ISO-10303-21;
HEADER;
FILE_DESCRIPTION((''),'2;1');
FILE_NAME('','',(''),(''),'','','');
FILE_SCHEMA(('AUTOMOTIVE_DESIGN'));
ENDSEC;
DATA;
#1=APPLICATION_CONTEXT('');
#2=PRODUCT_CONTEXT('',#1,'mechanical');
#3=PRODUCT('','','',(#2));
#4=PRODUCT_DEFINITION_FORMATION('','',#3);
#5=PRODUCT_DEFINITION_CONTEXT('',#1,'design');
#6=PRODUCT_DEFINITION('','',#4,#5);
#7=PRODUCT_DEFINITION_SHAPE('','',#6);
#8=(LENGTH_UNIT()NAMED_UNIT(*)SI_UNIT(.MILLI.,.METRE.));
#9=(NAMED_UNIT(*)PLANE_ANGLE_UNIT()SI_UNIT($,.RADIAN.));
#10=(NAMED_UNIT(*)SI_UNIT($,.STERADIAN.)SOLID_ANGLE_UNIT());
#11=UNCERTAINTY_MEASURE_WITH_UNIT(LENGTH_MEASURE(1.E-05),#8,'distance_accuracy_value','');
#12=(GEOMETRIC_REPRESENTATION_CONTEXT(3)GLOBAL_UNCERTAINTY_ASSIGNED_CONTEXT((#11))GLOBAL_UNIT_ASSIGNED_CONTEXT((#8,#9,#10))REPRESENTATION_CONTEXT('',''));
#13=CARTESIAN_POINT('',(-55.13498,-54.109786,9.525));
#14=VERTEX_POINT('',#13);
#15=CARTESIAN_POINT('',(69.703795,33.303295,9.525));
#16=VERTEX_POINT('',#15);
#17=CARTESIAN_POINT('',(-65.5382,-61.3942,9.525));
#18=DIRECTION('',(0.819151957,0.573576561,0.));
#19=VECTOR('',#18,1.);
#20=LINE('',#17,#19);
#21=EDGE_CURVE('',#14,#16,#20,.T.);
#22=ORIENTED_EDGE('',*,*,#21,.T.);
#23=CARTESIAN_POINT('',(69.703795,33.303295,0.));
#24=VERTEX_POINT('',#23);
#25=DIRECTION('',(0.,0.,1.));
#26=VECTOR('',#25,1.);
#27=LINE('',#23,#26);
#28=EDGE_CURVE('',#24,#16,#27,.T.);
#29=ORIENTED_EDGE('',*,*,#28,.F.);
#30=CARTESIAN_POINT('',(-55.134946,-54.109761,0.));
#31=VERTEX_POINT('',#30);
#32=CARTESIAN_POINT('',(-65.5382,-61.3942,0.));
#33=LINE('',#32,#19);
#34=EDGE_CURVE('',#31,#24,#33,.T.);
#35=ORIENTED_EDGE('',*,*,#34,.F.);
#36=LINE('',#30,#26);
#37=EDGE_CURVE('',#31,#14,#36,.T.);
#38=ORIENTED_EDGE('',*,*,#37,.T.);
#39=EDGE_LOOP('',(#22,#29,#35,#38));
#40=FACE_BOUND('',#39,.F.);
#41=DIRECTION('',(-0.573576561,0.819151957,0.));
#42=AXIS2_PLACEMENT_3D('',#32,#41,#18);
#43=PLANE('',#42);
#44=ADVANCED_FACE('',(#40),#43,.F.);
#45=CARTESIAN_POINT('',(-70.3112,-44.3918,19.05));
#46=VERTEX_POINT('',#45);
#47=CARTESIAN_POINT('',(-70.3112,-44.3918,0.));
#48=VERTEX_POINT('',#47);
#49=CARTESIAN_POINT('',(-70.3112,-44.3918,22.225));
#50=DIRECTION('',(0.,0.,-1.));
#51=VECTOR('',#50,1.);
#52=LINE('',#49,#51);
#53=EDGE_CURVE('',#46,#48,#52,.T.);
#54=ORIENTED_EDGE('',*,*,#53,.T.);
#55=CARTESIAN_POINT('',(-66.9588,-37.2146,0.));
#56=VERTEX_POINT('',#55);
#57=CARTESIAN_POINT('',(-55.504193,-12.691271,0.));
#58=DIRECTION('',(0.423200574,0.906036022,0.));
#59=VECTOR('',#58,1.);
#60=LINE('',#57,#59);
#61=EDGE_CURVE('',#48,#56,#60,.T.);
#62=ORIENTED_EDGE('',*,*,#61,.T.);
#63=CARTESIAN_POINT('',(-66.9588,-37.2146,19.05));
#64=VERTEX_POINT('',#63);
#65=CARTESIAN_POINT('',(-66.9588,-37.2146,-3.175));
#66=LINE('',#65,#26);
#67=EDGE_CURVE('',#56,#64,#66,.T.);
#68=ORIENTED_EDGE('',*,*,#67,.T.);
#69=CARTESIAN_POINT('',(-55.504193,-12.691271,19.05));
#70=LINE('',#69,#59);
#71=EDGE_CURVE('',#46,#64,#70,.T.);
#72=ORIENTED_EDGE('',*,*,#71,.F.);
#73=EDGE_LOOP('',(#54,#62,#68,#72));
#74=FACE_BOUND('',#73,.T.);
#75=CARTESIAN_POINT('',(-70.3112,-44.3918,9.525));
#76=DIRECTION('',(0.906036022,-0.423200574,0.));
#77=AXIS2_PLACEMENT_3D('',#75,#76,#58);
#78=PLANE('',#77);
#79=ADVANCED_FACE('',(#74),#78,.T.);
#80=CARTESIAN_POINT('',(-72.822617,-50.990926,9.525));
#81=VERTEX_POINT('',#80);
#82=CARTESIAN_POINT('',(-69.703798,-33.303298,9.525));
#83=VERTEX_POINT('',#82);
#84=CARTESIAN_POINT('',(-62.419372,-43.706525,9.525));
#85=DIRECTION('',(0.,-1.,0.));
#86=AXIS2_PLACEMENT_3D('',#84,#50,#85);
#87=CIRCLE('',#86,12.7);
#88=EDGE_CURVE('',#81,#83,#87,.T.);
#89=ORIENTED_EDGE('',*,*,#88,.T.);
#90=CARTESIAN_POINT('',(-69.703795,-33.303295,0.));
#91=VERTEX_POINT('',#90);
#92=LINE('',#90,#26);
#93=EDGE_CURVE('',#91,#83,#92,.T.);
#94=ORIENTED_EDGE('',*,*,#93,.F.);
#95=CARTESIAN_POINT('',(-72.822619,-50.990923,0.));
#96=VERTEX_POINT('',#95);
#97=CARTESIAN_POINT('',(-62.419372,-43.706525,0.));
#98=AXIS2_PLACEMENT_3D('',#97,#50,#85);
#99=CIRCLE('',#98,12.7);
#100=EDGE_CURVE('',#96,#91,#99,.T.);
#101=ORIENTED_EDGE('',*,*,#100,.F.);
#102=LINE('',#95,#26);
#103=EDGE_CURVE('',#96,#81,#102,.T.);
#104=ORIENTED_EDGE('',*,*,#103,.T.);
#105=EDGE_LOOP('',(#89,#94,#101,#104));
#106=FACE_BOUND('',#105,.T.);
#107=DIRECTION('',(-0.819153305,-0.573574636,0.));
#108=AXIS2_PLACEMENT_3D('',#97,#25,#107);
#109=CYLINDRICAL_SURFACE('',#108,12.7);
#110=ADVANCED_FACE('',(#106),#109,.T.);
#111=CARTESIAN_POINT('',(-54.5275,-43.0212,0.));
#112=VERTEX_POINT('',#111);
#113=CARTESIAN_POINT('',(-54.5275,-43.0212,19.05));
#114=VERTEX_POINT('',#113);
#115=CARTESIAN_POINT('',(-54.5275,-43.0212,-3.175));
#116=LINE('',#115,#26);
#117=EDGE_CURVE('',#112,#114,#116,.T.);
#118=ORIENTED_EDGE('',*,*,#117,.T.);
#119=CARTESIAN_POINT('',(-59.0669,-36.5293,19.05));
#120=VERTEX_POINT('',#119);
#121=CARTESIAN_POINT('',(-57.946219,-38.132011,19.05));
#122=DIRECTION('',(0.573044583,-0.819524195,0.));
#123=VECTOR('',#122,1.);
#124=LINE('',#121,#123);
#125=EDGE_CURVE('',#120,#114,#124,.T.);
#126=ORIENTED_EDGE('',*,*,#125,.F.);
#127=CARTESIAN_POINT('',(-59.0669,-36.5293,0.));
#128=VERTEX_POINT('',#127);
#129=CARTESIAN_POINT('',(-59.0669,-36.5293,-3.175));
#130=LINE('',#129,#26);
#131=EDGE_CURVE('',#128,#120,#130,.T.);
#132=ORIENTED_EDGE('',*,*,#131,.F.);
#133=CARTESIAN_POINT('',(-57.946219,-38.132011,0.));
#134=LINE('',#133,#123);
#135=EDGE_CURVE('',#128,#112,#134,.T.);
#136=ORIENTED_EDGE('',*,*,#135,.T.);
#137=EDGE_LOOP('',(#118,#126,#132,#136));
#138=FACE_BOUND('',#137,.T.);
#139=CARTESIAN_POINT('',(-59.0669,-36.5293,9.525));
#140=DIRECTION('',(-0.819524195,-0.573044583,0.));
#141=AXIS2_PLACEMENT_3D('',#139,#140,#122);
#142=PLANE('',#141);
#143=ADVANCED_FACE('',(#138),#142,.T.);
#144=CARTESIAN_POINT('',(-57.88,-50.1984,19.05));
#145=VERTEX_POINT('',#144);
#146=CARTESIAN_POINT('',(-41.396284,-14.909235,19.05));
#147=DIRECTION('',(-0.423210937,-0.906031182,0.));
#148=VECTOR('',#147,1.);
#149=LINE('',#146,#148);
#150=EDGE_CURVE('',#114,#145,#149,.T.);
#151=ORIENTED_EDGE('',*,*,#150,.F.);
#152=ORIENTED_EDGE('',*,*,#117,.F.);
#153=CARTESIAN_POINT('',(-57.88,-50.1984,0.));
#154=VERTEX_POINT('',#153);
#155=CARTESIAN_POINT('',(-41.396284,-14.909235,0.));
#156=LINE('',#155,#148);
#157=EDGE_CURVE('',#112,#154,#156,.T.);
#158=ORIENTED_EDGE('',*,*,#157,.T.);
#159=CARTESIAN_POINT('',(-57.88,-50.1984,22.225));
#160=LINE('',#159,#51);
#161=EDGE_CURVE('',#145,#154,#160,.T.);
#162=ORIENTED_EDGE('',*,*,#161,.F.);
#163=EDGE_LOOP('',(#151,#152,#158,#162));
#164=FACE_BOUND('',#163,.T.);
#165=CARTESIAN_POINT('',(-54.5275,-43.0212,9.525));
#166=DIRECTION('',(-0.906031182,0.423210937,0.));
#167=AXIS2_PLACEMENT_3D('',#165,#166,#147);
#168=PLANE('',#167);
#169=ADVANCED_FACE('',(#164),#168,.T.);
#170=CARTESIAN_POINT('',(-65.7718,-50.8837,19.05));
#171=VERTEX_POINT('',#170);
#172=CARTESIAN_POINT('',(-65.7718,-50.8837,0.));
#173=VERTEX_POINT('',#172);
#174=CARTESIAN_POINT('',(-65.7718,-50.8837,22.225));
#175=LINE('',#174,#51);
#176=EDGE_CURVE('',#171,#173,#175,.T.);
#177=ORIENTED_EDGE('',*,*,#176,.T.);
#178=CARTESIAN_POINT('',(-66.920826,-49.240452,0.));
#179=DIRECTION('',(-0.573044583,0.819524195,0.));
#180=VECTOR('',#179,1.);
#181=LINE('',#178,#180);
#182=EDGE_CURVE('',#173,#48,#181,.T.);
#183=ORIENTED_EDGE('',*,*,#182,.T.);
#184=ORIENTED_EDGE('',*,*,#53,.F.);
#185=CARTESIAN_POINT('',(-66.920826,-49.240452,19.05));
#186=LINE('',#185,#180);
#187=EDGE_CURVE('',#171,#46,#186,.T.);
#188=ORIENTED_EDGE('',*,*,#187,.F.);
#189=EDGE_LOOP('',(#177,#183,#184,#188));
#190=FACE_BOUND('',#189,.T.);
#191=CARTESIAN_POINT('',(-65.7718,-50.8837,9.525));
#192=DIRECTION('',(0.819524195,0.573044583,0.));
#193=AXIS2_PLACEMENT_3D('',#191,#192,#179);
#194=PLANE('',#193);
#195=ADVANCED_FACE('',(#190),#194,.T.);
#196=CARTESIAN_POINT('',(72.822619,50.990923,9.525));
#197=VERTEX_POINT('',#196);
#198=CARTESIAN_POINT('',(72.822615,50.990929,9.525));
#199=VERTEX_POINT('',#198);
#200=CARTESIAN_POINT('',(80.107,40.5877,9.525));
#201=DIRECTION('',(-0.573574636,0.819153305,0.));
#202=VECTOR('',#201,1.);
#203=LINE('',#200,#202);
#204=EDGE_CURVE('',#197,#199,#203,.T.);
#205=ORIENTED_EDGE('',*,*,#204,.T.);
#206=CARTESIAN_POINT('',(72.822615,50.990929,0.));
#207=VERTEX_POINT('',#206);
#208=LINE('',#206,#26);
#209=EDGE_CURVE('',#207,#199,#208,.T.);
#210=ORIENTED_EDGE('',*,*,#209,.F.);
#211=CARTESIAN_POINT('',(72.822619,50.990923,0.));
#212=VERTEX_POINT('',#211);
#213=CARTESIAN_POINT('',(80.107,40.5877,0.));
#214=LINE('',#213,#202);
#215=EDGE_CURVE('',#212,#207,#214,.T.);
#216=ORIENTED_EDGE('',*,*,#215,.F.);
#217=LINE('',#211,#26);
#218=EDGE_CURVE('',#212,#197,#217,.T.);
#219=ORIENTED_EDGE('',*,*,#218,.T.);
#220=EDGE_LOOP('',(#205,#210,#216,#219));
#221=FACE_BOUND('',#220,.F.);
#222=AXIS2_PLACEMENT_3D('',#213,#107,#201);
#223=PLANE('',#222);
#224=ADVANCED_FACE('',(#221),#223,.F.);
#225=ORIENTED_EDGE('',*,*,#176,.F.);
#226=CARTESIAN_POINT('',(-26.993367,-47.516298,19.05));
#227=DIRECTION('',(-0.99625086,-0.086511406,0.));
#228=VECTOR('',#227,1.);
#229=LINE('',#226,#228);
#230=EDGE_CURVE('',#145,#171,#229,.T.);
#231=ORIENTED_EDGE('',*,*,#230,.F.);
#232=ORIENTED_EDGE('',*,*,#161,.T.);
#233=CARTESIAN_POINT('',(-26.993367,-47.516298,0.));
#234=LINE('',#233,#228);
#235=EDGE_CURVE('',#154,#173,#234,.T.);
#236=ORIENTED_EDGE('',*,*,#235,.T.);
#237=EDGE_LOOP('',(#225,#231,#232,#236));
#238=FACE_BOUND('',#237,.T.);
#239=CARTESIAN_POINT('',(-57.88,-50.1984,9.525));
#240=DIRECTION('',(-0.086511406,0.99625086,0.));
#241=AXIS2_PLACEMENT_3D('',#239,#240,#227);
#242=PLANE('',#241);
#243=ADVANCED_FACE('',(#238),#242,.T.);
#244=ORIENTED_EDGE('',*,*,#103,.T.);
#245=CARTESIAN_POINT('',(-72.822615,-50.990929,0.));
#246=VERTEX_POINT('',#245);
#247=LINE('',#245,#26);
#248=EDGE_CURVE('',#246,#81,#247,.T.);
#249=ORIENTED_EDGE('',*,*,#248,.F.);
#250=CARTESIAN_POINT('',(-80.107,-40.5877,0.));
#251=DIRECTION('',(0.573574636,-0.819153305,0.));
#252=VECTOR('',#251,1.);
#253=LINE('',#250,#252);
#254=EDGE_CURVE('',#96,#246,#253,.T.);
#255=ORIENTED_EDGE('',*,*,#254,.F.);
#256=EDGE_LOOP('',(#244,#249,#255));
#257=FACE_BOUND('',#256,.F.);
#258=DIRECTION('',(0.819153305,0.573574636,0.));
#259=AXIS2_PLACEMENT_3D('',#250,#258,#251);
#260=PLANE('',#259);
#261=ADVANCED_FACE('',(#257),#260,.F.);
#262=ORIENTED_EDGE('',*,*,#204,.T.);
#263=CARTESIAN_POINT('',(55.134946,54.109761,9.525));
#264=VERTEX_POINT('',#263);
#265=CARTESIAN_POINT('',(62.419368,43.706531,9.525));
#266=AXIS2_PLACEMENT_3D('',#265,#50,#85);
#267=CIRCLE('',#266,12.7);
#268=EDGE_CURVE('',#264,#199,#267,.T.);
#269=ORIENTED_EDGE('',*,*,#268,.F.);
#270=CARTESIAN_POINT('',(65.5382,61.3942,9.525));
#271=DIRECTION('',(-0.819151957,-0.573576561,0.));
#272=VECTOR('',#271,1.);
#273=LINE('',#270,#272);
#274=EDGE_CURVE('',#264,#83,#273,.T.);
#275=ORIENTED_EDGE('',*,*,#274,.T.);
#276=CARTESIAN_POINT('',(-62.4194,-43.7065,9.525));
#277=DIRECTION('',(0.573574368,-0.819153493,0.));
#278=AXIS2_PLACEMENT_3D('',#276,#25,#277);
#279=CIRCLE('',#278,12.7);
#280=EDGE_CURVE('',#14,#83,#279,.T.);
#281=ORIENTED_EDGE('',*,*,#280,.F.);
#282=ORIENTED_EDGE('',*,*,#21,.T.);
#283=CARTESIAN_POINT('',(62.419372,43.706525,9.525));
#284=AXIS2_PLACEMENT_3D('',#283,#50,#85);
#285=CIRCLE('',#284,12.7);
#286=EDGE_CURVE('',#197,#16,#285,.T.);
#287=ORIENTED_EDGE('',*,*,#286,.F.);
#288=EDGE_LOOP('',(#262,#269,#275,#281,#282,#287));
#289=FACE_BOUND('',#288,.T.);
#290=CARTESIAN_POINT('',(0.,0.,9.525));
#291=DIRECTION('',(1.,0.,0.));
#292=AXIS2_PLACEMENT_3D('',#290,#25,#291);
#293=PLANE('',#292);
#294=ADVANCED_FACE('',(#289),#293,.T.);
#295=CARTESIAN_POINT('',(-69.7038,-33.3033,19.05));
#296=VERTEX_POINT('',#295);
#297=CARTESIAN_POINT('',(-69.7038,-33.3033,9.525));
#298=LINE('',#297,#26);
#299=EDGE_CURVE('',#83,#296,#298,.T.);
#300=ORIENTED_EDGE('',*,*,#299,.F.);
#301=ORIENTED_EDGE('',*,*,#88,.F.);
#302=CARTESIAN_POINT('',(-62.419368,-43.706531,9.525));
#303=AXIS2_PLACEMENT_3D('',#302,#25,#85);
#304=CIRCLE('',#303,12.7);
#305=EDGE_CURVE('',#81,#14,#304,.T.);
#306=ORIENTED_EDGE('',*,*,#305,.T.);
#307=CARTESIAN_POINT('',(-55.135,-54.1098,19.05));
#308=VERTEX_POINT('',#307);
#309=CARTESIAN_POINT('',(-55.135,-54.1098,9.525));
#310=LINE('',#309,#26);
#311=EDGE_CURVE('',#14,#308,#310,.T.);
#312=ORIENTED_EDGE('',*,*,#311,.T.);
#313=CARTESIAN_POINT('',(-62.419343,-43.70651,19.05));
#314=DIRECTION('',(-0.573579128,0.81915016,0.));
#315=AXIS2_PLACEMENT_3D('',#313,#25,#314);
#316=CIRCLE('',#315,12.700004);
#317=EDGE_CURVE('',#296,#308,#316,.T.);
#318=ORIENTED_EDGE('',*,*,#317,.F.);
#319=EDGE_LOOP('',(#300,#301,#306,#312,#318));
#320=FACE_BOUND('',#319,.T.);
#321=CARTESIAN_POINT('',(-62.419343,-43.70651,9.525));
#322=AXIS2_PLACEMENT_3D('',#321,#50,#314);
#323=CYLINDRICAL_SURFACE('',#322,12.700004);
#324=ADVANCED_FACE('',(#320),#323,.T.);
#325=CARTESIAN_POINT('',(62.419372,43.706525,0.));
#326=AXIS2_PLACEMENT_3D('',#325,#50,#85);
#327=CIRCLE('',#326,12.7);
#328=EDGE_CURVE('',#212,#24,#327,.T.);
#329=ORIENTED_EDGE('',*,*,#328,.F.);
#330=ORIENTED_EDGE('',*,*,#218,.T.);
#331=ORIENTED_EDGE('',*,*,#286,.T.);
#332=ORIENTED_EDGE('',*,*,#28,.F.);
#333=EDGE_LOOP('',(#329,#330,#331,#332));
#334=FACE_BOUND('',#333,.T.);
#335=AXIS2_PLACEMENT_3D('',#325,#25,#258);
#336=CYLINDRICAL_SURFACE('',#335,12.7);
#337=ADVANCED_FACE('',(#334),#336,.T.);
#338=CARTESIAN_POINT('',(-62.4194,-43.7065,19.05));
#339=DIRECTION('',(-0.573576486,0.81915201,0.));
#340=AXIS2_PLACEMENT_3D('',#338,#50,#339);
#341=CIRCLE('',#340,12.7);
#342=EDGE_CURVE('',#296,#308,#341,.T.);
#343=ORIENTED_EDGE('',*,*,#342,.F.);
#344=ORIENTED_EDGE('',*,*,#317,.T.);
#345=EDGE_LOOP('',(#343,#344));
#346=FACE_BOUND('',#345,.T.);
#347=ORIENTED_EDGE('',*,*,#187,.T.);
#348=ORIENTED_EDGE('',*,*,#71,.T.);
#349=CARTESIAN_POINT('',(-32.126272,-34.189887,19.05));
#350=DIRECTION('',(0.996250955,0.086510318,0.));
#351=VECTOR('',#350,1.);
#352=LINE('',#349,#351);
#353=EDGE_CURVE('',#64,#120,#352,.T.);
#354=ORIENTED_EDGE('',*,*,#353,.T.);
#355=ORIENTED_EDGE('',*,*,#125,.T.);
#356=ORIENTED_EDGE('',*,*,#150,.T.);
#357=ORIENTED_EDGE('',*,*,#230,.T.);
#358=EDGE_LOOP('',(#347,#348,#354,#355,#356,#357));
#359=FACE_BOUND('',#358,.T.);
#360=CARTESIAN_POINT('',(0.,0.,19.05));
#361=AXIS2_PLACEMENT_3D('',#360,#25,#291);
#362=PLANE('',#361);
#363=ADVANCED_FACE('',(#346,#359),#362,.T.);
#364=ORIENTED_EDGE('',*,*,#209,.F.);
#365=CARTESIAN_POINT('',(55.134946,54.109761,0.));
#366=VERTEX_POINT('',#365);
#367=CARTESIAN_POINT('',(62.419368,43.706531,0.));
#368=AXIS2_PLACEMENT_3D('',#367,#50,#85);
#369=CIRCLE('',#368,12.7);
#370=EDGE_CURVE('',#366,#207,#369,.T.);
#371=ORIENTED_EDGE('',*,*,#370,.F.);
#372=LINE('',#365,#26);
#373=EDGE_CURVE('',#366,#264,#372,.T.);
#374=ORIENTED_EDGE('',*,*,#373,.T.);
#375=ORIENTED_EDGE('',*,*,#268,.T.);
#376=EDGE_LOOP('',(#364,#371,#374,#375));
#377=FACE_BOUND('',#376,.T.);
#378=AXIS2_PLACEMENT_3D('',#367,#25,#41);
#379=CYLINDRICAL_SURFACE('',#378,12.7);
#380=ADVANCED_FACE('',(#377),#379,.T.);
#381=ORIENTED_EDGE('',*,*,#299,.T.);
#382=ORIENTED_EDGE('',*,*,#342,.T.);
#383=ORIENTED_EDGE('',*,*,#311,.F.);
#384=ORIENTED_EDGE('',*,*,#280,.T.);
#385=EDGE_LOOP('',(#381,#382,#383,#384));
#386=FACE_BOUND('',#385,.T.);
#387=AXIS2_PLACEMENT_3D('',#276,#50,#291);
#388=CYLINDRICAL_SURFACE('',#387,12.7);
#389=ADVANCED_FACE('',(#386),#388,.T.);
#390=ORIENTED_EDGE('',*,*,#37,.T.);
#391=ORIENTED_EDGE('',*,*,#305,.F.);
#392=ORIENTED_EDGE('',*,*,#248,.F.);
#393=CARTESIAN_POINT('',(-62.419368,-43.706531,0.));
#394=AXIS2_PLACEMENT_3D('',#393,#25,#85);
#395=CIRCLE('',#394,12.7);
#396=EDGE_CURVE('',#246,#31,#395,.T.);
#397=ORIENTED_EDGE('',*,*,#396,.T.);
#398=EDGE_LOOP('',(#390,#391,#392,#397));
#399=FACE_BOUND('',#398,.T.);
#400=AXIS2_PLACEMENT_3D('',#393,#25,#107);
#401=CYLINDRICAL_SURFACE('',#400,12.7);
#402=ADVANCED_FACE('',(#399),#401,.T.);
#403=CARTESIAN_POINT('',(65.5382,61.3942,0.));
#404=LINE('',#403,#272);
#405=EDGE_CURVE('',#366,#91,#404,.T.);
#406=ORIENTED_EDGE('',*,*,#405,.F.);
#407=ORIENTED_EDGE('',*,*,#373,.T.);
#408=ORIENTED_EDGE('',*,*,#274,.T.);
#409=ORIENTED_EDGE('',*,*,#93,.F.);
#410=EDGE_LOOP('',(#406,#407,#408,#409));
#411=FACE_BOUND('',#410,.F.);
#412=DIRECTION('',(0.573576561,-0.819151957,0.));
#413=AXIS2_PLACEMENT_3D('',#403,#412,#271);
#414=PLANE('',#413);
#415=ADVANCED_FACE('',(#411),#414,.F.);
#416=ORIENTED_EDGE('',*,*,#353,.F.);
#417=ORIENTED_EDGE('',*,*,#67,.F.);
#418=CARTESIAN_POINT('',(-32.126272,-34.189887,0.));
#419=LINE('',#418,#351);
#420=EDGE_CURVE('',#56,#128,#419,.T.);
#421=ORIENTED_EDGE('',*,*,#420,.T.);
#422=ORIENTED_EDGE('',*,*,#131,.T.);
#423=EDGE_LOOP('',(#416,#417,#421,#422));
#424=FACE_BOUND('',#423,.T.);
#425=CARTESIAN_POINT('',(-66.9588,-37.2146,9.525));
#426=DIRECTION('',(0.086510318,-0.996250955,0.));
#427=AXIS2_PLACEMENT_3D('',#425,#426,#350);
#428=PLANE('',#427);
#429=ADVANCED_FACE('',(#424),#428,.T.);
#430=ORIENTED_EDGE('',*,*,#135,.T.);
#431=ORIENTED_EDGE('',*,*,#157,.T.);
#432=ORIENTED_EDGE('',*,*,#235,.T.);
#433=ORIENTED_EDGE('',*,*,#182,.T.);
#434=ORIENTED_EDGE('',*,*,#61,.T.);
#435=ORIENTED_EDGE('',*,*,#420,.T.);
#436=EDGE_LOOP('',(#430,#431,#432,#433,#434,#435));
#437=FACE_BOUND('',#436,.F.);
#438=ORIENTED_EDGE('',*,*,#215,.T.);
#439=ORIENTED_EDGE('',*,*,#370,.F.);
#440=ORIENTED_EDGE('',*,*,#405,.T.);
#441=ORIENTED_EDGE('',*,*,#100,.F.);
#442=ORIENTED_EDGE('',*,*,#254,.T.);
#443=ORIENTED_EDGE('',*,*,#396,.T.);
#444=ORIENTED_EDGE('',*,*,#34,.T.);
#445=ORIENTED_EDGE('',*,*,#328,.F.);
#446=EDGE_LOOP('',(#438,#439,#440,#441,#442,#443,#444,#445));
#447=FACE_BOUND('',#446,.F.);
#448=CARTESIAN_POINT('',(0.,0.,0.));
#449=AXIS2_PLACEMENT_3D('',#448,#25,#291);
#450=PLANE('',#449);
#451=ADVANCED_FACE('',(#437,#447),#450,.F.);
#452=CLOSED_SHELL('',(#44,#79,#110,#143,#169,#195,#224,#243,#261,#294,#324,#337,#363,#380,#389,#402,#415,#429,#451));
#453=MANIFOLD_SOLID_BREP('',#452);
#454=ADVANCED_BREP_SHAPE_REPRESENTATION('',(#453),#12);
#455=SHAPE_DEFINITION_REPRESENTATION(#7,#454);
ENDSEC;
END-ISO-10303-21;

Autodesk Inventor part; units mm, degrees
ref_plane "YZ Plane" through (0, 0, 0) normal (1, 0, 0) x (0, 1, 0)
ref_plane "XZ Plane" through (0, 0, 0) normal (0, 1, 0) x (-1, 0, 0)
ref_plane "XY Plane" through (0, 0, 0) normal (0, 0, 1) x (1, 0, 0)
sketch "Sketch1" plane through (0, 0, 0) normal (0, 0, 1) x (1, 0, 0)
  line L0 (-65.5382, -61.3942) -> (80.107, 40.5877)
  line L1 (80.107, 40.5877) -> (65.5382, 61.3942)
  line L2 (65.5382, 61.3942) -> (-80.107, -40.5877)
  line L3 (-80.107, -40.5877) -> (-65.5382, -61.3942)
  line L4 (-65.5382, -61.3942) -> (65.5382, 61.3942) construction
  line L5 (80.107, 40.5877) -> (-80.107, -40.5877) construction
  line L6 (-65.5382, -61.3942) -> (112.2618, -61.3942) construction
  point P0 (0, 0)
  dimension "d0" = 177.8
  dimension "d1" = 35
  dimension "d2" = 25.4
extrude "Extrusion1" add sketch "Sketch1" along normal blind 9.525
sketch "Sketch2" plane through (0, 0, 9.525) normal (0, 0, 1) x (1, 0, 0)
  point P0 (0, 0)
fillet "Fillet1" radius 12.7 4 edges at (65.5382, 61.3942, 4.7625) (80.107, 40.5877, 4.7625) (-65.5382, -61.3942, 4.7625) (-80.107, -40.5877, 4.7625)
sketch "Sketch3" plane through (0, 0, 9.525) normal (0, 0, 1) x (1, 0, 0)
  arc A0 (-69.7038, -33.3033) -> (-55.135, -54.1098) centre (-62.4194, -43.7065) ccw construction
  line L0 (-54.5275, -43.0212) -> (-57.88, -50.1984)
  line L1 (-57.88, -50.1984) -> (-65.7718, -50.8837)
  line L2 (-65.7718, -50.8837) -> (-70.3112, -44.3918)
  line L3 (-70.3112, -44.3918) -> (-66.9588, -37.2146)
  line L4 (-66.9588, -37.2146) -> (-59.0669, -36.5293)
  line L5 (-59.0669, -36.5293) -> (-54.5275, -43.0212)
  point P0 (0, 0)
sketch "Sketch4" plane through (0, 0, 9.525) normal (0, 0, 1) x (1, 0, 0)
  arc A0 (-69.7038, -33.3033) -> (-55.135, -54.1098) centre (-62.4194, -43.7065) ccw projected
  line L0 (55.135, 54.1098) -> (-69.7038, -33.3033) projected
  circle A1 centre (-62.4194, -43.7065) radius 12.7
  point P0 (0, 0)
  point P1 (-55.135, -54.1098)
extrude "Extrusion2" add sketch "Sketch4" along normal blind 9.525
extrude "Extrusion3" cut sketch "Sketch3" against normal mid plane 25.4
